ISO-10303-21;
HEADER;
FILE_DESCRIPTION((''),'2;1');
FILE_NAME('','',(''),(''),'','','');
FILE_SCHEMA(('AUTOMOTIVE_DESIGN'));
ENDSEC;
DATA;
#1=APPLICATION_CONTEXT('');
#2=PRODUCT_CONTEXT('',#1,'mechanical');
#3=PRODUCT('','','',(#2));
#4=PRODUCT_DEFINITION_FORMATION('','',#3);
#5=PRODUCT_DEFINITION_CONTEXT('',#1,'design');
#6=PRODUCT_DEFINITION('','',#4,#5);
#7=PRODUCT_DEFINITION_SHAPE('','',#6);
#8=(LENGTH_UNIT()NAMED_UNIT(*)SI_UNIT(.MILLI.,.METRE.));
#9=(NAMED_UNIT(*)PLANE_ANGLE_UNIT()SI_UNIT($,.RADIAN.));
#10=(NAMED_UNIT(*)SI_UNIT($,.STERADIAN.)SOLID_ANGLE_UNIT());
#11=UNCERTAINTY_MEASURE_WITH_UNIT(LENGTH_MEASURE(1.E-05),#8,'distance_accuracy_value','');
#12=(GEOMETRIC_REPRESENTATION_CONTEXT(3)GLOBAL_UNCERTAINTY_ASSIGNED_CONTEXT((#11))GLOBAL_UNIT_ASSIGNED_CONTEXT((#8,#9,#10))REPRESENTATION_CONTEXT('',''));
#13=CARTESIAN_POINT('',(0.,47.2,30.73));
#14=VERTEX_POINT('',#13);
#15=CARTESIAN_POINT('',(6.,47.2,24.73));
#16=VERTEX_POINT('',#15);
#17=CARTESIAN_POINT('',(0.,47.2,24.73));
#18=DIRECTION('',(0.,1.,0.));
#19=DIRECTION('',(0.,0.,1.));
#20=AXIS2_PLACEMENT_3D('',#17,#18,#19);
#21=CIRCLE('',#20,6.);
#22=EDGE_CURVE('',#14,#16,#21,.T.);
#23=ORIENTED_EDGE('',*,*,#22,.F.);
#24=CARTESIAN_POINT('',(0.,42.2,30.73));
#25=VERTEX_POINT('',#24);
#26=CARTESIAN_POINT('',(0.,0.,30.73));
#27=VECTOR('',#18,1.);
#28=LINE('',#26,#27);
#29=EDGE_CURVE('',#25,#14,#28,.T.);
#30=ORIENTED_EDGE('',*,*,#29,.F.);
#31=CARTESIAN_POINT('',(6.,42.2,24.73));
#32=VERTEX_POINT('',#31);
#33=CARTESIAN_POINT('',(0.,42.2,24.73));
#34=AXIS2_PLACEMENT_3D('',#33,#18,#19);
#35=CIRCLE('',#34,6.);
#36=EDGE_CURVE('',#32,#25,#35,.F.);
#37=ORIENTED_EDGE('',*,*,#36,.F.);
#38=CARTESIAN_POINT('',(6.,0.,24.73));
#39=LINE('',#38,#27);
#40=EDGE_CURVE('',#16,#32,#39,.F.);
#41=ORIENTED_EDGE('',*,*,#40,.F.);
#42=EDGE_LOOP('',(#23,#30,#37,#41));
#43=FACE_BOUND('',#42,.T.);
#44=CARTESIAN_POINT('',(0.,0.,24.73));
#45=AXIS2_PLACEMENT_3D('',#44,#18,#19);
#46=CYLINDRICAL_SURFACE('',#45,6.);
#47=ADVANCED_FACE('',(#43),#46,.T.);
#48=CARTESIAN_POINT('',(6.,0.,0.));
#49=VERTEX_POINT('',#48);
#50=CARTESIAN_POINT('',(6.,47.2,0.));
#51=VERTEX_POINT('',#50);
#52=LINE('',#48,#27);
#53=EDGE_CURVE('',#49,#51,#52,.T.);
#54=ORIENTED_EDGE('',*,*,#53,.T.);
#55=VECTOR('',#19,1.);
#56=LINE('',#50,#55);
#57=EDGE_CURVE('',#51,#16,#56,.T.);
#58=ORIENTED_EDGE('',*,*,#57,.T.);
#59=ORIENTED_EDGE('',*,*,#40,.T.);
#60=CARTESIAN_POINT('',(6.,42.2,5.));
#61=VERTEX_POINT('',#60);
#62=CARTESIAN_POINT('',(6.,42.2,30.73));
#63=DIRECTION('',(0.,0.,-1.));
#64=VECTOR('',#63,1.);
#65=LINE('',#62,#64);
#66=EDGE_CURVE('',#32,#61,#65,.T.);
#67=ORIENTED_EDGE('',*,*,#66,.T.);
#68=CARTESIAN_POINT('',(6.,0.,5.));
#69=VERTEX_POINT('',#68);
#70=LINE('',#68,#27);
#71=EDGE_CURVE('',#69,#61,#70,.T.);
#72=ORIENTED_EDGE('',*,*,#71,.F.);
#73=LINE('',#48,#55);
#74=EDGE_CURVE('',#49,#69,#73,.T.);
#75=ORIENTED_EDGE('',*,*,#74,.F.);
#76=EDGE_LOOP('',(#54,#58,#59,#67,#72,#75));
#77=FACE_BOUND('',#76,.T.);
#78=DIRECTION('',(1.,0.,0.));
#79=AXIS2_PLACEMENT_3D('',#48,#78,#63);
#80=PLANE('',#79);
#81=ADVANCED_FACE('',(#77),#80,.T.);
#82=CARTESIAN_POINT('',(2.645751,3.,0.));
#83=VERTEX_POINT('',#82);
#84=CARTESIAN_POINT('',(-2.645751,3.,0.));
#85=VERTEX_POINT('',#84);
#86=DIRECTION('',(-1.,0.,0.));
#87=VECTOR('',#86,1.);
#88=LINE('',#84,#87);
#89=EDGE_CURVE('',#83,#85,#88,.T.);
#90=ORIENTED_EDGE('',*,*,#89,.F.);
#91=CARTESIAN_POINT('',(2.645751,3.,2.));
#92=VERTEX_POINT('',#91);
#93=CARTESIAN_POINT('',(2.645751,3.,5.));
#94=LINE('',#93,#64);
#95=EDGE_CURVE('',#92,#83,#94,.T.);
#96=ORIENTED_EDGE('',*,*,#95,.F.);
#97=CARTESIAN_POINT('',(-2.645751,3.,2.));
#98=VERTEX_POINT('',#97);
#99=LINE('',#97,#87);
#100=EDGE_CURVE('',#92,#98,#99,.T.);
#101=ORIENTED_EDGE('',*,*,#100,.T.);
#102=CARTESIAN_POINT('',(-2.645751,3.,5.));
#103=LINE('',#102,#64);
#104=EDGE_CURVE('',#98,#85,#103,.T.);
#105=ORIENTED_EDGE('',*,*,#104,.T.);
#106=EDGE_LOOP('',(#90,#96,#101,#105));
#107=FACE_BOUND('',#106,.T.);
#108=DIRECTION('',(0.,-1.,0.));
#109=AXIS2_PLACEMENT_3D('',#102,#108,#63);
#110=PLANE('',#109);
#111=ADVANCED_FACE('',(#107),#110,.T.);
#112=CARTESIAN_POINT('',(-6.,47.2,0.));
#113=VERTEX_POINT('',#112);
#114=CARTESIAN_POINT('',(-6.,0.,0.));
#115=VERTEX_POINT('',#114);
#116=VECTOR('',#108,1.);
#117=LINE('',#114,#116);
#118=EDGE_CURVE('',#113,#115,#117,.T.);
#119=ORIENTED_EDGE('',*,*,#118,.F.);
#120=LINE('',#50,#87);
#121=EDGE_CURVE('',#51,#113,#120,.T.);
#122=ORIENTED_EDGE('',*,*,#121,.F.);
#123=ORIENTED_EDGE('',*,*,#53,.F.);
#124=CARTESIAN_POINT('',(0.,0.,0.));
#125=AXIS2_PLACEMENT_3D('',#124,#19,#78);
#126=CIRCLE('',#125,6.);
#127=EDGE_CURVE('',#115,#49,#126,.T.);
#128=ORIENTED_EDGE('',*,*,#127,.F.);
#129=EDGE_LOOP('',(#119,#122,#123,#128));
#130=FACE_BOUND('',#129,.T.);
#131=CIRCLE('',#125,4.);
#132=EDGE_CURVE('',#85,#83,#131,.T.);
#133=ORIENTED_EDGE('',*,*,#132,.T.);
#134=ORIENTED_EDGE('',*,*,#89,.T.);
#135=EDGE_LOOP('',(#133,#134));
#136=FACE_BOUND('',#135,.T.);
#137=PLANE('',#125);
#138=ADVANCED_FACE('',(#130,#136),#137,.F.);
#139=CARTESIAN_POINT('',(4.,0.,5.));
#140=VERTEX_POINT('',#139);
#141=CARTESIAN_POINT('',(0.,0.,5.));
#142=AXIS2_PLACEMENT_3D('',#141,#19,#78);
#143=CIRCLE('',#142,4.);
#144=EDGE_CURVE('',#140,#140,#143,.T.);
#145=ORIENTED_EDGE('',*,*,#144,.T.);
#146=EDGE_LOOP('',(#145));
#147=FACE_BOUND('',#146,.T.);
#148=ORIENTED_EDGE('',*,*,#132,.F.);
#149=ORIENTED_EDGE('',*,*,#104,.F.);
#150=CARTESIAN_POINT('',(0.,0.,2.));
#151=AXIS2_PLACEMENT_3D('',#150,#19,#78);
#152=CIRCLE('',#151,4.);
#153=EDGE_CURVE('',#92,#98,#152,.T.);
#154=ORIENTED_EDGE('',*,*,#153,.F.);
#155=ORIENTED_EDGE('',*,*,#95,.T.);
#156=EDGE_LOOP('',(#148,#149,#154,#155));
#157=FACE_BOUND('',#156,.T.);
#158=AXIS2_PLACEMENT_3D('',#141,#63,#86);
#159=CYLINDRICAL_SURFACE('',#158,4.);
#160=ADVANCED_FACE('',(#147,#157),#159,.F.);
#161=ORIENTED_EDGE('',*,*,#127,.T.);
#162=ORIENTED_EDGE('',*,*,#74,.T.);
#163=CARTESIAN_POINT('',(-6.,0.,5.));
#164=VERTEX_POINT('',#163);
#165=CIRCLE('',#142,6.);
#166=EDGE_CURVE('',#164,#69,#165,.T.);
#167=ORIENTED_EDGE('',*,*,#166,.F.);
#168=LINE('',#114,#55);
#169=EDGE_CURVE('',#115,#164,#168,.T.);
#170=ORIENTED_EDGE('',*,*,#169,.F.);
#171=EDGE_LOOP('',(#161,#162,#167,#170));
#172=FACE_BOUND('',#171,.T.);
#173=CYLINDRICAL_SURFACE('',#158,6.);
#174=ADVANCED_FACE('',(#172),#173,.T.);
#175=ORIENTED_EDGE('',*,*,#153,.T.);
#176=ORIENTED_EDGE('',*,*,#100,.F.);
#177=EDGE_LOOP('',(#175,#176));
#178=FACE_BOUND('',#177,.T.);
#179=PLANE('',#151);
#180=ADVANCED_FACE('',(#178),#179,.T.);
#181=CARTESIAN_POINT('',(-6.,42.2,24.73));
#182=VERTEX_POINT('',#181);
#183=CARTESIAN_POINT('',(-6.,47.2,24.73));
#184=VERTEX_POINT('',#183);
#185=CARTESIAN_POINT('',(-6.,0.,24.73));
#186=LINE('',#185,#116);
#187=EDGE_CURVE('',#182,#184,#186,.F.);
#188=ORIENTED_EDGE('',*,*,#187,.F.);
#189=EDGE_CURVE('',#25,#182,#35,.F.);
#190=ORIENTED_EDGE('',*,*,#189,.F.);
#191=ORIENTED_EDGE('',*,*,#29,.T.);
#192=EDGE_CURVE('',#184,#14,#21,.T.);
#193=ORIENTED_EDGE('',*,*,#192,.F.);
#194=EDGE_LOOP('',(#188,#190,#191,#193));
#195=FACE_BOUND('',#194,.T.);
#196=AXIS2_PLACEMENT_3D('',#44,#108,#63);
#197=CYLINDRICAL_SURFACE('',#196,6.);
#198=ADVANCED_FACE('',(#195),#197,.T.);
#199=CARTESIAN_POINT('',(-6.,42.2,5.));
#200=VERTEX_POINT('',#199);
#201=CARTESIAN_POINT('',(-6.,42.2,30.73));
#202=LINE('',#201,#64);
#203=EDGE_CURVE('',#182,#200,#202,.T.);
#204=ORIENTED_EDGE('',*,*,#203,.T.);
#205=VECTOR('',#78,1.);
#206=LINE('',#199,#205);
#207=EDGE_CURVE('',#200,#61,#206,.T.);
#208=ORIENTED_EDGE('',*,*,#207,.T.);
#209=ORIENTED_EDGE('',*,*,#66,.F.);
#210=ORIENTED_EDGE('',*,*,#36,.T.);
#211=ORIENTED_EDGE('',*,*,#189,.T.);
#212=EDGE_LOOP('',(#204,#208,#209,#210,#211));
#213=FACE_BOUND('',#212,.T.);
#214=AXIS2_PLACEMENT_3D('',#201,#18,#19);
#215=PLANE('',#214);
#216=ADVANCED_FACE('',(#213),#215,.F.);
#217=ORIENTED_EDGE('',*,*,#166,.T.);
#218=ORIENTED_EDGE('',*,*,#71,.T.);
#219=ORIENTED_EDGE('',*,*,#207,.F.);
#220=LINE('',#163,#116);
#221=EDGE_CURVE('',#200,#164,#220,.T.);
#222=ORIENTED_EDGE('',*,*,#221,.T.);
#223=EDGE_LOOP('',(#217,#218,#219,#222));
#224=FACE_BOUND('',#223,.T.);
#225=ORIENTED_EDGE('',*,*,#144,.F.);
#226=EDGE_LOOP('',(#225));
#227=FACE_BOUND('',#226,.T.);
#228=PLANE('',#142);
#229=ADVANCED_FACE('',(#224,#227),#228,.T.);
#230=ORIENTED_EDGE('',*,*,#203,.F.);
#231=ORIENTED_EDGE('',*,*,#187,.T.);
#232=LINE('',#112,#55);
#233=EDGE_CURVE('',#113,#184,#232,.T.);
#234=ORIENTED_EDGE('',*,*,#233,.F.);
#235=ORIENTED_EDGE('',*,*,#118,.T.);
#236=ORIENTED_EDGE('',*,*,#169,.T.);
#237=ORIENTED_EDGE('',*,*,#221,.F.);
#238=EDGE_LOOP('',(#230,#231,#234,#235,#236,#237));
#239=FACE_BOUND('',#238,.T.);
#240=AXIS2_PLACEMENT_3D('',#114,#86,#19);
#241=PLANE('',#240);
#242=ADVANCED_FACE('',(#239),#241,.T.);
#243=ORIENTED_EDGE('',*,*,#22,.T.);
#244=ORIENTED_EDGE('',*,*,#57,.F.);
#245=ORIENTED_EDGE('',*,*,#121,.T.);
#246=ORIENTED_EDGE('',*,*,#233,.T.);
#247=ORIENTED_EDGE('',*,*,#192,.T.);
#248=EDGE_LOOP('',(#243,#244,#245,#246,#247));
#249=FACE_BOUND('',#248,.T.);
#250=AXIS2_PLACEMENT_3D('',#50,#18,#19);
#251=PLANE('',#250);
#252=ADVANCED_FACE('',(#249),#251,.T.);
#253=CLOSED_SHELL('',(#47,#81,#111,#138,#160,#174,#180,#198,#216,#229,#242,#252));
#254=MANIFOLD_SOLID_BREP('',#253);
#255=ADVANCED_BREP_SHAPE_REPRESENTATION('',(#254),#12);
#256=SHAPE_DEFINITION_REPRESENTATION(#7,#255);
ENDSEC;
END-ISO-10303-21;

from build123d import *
from build123d.topology import SkipClean

# Parameters (mm, degrees)
SKETCH1_R           = 6
BOSS_EXTRUDE1_DEPTH = 5
BOSS_EXTRUDE2_START = -5
BOSS_EXTRUDE2_DEPTH = 5
CUT_EXTRUDE1_START  = -3
SKETCH3_R           = 4
CUT_EXTRUDE1_DEPTH  = 3
SKETCH4_W           = 12
SKETCH4_H           = 5
BOSS_EXTRUDE3_DEPTH = 25.73
FILLET1_R           = 6


with BuildPart() as part:
    # Sketch1 → Boss-Extrude1 (new body)
    with BuildSketch(Plane.XY):
        Circle(SKETCH1_R)
        with BuildLine():
            Line((-2.645751311, 3), (2.645751311, 3))
            ThreePointArc((2.645751311, 3), (0, -4), (-2.645751311, 3))
        make_face(mode=Mode.SUBTRACT)
    extrude(amount=BOSS_EXTRUDE1_DEPTH)

    # Sketch2 → Boss-Extrude2 (add)
    with BuildSketch(Plane.XY.offset(5).offset(BOSS_EXTRUDE2_START)):
        with BuildLine():
            Line((-6, 0), (-6, 47.2))
            Line((-6, 47.2), (6, 47.2))
            Line((6, 47.2), (6, 0))
            ThreePointArc((6, 0), (0, 6), (-6, 0))
        make_face()
    extrude(amount=BOSS_EXTRUDE2_DEPTH)

    # Sketch3 → Cut-Extrude1 (cut)
    with SkipClean():  # the faces are left unmerged after this step: merging them gives an invalid solid
        with BuildSketch(Plane.XY.offset(5).offset(CUT_EXTRUDE1_START)):
            with Locations(Location((0, 0, 0), (0, 0, 131.409622109))):
                Circle(SKETCH3_R)
        extrude(amount=CUT_EXTRUDE1_DEPTH, mode=Mode.SUBTRACT)

    # Sketch4 → Boss-Extrude3 (add)
    with SkipClean():  # the faces are left unmerged after this step: merging them gives an invalid solid
        with BuildSketch(Plane.XY.offset(5)):
            with Locations((0, 44.7)):
                Rectangle(SKETCH4_W, SKETCH4_H)
        extrude(amount=BOSS_EXTRUDE3_DEPTH)

    # Fillet1
    fillet1_edges = [part.edges().sort_by_distance(p)[0] for p in [
        (-6, 44.7, 30.73),
        (6, 44.7, 30.73),
    ]]
    fillet(fillet1_edges, radius=FILLET1_R - 0.0001)  # a hair under: the kernel refuses the full size


solid = part.part
